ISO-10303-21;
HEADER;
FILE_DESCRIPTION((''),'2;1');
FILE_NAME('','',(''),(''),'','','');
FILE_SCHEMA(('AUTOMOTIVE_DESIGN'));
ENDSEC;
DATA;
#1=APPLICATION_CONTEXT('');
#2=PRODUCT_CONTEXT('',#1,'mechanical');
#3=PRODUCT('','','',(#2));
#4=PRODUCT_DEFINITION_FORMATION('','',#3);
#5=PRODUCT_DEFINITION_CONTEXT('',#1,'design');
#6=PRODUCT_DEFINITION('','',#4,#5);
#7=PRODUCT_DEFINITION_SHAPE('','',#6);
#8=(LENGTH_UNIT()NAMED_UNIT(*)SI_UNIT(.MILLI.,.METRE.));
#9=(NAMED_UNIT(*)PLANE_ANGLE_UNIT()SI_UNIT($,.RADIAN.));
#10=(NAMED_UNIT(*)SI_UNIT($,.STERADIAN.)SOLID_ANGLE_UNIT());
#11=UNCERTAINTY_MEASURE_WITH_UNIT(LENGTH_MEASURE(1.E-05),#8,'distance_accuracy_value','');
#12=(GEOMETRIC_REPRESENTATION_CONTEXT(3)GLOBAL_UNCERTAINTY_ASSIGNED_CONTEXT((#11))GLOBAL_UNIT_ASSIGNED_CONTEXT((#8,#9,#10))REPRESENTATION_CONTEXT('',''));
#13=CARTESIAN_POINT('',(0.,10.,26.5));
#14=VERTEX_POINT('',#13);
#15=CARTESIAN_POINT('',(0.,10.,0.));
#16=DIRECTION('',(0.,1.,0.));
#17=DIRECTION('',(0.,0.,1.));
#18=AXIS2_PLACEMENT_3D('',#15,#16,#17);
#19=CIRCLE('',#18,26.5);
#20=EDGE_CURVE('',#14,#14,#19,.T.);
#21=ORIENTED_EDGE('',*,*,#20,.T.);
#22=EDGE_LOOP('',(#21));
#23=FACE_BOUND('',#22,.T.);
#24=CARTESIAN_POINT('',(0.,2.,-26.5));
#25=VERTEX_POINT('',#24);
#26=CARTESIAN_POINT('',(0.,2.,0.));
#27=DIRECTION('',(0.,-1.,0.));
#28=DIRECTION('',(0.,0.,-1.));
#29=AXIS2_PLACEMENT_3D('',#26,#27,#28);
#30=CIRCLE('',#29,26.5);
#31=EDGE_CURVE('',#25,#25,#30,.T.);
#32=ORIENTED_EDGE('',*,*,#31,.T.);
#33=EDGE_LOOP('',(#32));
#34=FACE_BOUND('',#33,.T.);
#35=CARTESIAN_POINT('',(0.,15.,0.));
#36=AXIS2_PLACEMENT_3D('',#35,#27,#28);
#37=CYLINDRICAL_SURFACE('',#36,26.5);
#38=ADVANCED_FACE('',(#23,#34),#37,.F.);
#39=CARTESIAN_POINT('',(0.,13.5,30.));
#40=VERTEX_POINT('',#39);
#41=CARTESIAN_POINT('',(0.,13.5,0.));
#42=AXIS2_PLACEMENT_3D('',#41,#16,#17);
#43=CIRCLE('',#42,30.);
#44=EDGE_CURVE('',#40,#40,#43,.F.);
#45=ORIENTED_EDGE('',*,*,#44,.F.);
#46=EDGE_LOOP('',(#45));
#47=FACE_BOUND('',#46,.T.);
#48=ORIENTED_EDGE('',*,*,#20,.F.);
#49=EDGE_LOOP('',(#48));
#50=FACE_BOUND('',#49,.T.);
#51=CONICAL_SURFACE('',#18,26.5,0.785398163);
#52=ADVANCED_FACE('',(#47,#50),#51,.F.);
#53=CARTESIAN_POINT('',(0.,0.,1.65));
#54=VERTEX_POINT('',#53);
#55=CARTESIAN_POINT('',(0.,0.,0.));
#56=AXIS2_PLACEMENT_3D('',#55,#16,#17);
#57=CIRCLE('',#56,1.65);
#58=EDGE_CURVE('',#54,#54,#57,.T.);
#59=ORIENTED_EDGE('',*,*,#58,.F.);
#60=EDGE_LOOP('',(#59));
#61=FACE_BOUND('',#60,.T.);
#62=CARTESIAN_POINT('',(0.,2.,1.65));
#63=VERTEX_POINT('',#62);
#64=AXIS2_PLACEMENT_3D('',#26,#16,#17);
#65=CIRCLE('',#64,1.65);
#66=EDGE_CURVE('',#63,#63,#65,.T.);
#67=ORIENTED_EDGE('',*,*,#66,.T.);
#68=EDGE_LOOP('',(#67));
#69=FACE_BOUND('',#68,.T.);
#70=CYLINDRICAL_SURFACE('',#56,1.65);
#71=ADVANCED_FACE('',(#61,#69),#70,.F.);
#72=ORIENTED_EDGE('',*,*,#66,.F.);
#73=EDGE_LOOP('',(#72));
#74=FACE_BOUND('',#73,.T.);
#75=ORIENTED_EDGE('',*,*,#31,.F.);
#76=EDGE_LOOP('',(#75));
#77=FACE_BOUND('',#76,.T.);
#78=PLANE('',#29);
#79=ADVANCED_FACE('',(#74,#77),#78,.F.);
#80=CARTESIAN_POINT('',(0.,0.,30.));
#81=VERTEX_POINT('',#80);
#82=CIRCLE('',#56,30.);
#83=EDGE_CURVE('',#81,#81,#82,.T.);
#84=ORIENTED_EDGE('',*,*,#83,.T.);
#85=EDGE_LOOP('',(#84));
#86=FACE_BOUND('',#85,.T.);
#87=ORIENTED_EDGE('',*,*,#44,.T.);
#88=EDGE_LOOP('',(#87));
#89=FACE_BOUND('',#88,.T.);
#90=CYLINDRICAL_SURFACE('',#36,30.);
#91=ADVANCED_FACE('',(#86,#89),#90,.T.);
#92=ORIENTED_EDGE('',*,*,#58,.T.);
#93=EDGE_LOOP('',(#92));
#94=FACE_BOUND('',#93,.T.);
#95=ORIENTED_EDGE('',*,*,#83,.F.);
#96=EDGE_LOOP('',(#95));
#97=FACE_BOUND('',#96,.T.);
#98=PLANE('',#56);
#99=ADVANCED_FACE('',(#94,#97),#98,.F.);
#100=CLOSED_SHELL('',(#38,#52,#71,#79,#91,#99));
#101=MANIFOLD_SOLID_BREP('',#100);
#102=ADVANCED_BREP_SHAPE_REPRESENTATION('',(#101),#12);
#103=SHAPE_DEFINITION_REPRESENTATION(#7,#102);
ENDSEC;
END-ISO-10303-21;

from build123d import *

# Parameters (mm, degrees)
SKETCH_1_R          = 30
SKETCH_1_R_2        = 26.5
EXTRUDE_1_DEPTH     = 15
SKETCH_2_R          = 30
EXTRUDE_2_DEPTH     = 2
CHAMFER_1_SIZE      = 5
SKETCH_3_R          = 1.65
CUT_EXTRUDE_1_DEPTH = 44.957365708


with BuildPart() as part:
    # 草图1 → 凸台-拉伸1 (new body)
    with BuildSketch(Plane(origin=(0, 0, 0), x_dir=(1, 0, 0), z_dir=(0, 1, 0))):
        with Locations(Location((0, 0, 0), (0, 0, 270))):
            Circle(SKETCH_1_R)
        with Locations(Location((0, 0, 0), (0, 0, 270))):
            Circle(SKETCH_1_R_2, mode=Mode.SUBTRACT)
    extrude(amount=EXTRUDE_1_DEPTH)

    # 草图2 → 凸台-拉伸2 (add)
    with BuildSketch(Plane.XZ):
        with Locations(Location((0, 0, 0), (0, 0, 90))):
            Circle(SKETCH_2_R)
    extrude(amount=-EXTRUDE_2_DEPTH)

    # 倒角1
    # the kernel refuses this chamfer: 5 mm, written as the material it takes off along each edge
    with BuildSketch(Plane(origin=(0, 15, 0), x_dir=(0, 0, 1), z_dir=(-1, 0, 0))) as chamfer_1_piece_1:
        Polygon((26.5 + CHAMFER_1_SIZE, 0), (26.5, -CHAMFER_1_SIZE), (26.5, 0), align=None)
    revolve(axis=Axis((0, 15, 0), (0, 1, 0)), mode=Mode.SUBTRACT)

    # 草图3 → 切除-拉伸1 (cut, through all)
    with BuildSketch(Plane(origin=(0, 2, 0), x_dir=(1, 0, 0), z_dir=(0, 1, 0))):
        with Locations(Location((0, 0, 0), (0, 0, 270))):
            Circle(SKETCH_3_R)
    extrude(amount=-CUT_EXTRUDE_1_DEPTH, mode=Mode.SUBTRACT)


solid = part.part
